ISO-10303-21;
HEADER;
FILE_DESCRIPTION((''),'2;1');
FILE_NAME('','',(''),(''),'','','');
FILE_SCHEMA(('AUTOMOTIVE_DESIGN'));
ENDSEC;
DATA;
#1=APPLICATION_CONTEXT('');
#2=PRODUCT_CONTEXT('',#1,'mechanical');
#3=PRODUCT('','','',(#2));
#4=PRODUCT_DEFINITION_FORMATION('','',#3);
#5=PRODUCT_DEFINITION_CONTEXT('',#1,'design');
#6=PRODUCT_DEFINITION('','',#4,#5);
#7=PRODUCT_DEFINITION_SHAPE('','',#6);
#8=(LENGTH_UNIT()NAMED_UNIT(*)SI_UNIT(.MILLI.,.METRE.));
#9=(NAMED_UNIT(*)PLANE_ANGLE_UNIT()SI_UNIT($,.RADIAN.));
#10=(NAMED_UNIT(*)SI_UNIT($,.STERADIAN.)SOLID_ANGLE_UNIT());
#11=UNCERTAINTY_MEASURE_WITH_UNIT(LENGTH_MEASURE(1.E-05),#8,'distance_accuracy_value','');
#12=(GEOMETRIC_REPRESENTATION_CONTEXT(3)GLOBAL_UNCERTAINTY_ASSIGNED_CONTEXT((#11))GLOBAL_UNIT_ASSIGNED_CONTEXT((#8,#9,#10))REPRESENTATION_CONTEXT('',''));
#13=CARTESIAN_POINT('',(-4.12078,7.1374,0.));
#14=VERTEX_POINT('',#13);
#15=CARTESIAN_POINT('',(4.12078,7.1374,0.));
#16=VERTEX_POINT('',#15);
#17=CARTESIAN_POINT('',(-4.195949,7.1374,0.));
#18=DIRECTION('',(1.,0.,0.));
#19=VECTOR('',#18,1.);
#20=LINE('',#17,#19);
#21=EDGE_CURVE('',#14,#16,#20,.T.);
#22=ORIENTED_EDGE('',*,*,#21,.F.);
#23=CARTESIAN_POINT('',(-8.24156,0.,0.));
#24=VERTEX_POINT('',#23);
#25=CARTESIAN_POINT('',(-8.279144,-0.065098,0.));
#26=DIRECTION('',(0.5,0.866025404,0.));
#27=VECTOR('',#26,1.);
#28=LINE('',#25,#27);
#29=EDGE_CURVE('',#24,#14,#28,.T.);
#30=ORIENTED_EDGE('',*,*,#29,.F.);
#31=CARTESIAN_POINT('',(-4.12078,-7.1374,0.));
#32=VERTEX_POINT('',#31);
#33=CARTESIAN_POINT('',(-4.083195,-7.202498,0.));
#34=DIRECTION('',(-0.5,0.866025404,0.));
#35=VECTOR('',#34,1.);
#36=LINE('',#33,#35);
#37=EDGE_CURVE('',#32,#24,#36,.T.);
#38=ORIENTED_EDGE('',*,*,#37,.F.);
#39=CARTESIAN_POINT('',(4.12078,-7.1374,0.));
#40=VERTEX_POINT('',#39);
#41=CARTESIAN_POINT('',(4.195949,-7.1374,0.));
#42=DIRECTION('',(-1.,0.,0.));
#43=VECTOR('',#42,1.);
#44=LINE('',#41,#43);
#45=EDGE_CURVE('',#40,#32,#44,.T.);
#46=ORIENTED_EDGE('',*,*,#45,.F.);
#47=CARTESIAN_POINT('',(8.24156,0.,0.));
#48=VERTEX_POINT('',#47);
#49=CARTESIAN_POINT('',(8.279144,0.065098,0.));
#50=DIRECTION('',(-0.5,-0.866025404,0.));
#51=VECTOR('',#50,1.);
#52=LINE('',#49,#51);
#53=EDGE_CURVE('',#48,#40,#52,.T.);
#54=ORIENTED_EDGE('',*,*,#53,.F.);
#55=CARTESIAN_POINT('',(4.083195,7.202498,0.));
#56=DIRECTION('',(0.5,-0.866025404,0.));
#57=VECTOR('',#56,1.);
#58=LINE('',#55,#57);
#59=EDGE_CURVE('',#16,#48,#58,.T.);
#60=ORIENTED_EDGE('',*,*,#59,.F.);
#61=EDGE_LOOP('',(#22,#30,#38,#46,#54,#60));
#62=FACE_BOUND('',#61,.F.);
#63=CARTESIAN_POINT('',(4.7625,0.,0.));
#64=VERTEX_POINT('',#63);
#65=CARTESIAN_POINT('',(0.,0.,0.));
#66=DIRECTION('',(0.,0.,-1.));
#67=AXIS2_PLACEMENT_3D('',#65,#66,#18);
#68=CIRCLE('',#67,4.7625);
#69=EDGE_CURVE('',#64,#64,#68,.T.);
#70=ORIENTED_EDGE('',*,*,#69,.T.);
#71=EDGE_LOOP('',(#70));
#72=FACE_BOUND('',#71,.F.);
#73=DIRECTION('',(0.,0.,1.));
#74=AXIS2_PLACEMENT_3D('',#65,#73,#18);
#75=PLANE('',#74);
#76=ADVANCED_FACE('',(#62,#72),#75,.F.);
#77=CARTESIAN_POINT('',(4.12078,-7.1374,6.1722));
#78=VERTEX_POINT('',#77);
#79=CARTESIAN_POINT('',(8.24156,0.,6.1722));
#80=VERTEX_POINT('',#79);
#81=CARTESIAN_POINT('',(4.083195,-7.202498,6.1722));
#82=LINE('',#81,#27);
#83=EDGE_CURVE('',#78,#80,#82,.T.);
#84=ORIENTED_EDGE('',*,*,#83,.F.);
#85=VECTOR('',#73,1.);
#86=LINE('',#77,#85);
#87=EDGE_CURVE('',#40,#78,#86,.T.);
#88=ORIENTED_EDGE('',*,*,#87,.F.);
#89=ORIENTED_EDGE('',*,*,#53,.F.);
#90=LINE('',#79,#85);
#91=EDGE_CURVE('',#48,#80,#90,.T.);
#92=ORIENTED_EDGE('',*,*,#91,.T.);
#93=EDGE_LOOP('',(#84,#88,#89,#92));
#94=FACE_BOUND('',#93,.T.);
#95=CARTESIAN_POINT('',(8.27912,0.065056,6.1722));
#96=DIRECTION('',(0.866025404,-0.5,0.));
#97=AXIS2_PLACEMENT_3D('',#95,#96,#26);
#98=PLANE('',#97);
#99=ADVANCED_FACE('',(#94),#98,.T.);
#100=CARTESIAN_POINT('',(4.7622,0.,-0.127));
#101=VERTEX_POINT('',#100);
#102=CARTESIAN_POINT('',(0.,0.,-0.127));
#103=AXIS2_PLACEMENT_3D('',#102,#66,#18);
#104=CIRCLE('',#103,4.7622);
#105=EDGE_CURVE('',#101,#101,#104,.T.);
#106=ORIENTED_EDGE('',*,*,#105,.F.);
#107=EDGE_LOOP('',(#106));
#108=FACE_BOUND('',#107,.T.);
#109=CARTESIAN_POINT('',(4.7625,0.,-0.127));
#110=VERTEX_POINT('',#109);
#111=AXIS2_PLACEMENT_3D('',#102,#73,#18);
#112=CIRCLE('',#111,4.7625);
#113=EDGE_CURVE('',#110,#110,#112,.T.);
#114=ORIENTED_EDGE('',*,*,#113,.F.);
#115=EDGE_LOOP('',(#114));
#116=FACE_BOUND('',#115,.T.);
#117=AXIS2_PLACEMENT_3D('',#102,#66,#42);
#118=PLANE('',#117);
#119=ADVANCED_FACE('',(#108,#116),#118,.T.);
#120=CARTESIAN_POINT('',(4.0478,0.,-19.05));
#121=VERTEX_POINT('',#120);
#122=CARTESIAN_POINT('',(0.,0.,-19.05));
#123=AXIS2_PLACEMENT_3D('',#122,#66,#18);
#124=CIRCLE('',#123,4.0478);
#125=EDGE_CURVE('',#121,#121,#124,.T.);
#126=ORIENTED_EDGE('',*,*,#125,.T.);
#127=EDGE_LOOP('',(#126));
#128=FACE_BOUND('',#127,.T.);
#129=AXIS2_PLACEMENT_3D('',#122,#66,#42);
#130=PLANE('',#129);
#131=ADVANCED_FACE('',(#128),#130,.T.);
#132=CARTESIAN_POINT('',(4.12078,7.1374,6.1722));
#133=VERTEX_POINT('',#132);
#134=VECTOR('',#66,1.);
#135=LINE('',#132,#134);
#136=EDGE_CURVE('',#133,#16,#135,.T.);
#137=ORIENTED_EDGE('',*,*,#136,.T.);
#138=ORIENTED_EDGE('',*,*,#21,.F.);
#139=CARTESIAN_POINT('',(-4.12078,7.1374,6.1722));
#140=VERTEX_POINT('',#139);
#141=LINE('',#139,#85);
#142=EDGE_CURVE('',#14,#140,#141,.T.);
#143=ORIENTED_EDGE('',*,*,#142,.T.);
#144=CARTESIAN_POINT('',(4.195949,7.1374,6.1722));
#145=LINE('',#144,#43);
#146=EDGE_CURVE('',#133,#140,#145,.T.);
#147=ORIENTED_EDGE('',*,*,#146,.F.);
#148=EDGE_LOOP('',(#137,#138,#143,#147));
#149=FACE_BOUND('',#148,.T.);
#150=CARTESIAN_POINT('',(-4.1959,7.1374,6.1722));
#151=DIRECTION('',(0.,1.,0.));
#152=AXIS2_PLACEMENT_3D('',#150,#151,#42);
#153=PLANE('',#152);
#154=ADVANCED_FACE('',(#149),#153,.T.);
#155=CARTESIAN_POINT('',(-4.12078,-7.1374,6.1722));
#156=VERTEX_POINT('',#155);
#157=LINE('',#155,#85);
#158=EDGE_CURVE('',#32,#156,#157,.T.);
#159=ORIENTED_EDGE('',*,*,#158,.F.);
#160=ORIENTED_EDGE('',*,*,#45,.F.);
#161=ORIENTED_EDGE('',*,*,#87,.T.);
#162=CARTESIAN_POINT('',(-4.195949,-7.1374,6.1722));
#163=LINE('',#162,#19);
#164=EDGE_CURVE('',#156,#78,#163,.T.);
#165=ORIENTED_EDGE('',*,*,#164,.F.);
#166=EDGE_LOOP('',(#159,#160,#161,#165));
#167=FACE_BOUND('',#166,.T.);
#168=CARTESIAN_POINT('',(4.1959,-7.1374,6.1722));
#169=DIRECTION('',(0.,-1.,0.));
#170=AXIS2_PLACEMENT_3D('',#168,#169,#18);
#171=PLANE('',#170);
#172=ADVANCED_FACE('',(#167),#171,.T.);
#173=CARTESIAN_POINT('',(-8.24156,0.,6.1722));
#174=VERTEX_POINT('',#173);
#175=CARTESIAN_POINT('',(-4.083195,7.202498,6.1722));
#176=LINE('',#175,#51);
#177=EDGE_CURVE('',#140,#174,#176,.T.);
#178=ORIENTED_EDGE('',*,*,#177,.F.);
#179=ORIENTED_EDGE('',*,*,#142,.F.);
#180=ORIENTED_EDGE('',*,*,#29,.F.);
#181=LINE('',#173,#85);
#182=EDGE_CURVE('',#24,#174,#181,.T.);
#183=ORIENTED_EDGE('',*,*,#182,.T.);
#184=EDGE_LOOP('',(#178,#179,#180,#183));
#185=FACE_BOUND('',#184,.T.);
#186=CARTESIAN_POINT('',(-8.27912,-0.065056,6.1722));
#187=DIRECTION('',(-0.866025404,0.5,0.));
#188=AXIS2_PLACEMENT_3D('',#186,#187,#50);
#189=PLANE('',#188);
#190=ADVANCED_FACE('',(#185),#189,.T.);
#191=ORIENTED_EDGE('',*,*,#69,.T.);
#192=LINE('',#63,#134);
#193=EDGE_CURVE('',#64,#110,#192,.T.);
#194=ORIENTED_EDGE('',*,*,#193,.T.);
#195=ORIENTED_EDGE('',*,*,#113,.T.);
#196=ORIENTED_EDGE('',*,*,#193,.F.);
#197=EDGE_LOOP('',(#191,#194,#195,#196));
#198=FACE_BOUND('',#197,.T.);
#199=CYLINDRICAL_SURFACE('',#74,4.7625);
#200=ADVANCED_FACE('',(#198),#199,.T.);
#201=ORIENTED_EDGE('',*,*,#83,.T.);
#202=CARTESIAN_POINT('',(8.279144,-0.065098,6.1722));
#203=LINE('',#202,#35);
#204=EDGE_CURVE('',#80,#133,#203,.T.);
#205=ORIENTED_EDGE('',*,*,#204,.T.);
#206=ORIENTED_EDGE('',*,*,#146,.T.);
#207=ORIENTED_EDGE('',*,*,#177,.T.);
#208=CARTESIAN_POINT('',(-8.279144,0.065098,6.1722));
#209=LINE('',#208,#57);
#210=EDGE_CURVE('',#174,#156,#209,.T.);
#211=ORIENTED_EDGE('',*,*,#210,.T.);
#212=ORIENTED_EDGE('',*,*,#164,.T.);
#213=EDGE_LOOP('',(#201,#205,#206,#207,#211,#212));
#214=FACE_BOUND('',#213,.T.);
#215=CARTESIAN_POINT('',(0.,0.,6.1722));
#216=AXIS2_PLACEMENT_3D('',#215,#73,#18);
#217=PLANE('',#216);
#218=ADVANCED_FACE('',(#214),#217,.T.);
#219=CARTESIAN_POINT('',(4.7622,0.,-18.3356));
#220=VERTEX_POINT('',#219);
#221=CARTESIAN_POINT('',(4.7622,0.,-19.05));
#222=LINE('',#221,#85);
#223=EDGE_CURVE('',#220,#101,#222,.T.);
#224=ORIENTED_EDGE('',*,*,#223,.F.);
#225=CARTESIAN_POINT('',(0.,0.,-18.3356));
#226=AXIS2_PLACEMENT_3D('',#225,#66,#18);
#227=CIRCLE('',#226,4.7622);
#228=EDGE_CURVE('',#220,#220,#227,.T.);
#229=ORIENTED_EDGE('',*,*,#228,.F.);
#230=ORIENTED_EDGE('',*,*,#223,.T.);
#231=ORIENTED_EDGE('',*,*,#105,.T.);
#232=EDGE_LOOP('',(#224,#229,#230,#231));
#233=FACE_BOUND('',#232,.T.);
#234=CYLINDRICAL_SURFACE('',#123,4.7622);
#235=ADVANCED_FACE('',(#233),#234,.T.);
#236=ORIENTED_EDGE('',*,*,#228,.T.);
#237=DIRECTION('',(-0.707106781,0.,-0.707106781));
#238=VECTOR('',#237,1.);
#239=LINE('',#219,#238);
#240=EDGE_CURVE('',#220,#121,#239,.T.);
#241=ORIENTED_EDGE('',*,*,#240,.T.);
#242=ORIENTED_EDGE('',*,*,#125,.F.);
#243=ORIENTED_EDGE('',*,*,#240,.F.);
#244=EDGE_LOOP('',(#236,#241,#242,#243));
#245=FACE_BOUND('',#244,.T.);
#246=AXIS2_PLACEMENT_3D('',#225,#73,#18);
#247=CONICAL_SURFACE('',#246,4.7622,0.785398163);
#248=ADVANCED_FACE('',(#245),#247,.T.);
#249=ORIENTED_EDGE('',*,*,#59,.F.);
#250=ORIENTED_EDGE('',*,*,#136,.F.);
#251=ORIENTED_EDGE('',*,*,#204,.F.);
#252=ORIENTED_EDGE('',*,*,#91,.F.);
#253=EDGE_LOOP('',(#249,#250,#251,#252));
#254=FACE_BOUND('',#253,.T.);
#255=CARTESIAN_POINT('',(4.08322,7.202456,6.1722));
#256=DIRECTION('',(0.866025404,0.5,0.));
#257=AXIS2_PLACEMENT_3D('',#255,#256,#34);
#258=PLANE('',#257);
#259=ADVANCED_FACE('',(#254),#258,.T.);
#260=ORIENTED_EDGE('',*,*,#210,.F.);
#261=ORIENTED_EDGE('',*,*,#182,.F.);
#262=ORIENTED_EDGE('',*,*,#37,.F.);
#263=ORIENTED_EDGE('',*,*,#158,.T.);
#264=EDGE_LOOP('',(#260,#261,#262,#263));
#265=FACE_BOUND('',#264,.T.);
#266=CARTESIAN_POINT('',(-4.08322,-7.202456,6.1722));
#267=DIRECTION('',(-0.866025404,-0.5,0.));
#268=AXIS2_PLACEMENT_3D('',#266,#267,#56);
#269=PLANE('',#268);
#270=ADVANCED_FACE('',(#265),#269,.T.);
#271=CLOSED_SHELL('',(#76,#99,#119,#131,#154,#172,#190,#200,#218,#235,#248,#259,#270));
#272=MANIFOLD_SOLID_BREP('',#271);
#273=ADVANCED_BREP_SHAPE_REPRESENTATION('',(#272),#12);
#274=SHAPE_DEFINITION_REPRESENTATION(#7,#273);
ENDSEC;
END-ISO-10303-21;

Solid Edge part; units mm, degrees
sketch "Sketch1" plane through (0, 0, 0) normal (0, 0, 1) x (1, 0, 0)
  circle A0 centre (0, 0) radius 8.2794
  dimension "D1" = 16.5588
extrude "Protrusion1" add sketch "Sketch1" along normal blind 6.1722
sketch "Sketch2" plane through (0, 0, 0) normal (0, 0, -1) x (1, 0, 0)
  circle A0 centre (0, 0) radius 4.7625
extrude "Protrusion2" add sketch "Sketch2" along normal blind 19.05
sketch "Sketch3" plane through (0, 0, -19.05) normal (0, 0, -1) x (1, 0, 0)
  circle A0 centre (0, 0) radius 4.7622
extrude "Cutout1" cut sketch "Sketch3" against normal blind 18.923 flip side to cut
chamfer "Chamfer_1" distance 0.7144 angle 45 1 edges at (-4.7622, 0, -19.05)
sketch "Sketch4" plane through (0, 0, 6.1722) normal (0, 0, 1) x (1, 0, 0)
  line L0 (-4.1959, 7.1374) -> (4.1959, 7.1374)
  dimension "D1" = 14.2748
extrude "Cutout2" cut sketch "Sketch4" against normal up to next material side at (0, 7.1874, 6.1722)
pattern_circular "Pattern1" count 6 over 360 about axis through (0, 0, 6.1722) along (0, 0, 1) of "Cutout2"
properties part number "24102668"
